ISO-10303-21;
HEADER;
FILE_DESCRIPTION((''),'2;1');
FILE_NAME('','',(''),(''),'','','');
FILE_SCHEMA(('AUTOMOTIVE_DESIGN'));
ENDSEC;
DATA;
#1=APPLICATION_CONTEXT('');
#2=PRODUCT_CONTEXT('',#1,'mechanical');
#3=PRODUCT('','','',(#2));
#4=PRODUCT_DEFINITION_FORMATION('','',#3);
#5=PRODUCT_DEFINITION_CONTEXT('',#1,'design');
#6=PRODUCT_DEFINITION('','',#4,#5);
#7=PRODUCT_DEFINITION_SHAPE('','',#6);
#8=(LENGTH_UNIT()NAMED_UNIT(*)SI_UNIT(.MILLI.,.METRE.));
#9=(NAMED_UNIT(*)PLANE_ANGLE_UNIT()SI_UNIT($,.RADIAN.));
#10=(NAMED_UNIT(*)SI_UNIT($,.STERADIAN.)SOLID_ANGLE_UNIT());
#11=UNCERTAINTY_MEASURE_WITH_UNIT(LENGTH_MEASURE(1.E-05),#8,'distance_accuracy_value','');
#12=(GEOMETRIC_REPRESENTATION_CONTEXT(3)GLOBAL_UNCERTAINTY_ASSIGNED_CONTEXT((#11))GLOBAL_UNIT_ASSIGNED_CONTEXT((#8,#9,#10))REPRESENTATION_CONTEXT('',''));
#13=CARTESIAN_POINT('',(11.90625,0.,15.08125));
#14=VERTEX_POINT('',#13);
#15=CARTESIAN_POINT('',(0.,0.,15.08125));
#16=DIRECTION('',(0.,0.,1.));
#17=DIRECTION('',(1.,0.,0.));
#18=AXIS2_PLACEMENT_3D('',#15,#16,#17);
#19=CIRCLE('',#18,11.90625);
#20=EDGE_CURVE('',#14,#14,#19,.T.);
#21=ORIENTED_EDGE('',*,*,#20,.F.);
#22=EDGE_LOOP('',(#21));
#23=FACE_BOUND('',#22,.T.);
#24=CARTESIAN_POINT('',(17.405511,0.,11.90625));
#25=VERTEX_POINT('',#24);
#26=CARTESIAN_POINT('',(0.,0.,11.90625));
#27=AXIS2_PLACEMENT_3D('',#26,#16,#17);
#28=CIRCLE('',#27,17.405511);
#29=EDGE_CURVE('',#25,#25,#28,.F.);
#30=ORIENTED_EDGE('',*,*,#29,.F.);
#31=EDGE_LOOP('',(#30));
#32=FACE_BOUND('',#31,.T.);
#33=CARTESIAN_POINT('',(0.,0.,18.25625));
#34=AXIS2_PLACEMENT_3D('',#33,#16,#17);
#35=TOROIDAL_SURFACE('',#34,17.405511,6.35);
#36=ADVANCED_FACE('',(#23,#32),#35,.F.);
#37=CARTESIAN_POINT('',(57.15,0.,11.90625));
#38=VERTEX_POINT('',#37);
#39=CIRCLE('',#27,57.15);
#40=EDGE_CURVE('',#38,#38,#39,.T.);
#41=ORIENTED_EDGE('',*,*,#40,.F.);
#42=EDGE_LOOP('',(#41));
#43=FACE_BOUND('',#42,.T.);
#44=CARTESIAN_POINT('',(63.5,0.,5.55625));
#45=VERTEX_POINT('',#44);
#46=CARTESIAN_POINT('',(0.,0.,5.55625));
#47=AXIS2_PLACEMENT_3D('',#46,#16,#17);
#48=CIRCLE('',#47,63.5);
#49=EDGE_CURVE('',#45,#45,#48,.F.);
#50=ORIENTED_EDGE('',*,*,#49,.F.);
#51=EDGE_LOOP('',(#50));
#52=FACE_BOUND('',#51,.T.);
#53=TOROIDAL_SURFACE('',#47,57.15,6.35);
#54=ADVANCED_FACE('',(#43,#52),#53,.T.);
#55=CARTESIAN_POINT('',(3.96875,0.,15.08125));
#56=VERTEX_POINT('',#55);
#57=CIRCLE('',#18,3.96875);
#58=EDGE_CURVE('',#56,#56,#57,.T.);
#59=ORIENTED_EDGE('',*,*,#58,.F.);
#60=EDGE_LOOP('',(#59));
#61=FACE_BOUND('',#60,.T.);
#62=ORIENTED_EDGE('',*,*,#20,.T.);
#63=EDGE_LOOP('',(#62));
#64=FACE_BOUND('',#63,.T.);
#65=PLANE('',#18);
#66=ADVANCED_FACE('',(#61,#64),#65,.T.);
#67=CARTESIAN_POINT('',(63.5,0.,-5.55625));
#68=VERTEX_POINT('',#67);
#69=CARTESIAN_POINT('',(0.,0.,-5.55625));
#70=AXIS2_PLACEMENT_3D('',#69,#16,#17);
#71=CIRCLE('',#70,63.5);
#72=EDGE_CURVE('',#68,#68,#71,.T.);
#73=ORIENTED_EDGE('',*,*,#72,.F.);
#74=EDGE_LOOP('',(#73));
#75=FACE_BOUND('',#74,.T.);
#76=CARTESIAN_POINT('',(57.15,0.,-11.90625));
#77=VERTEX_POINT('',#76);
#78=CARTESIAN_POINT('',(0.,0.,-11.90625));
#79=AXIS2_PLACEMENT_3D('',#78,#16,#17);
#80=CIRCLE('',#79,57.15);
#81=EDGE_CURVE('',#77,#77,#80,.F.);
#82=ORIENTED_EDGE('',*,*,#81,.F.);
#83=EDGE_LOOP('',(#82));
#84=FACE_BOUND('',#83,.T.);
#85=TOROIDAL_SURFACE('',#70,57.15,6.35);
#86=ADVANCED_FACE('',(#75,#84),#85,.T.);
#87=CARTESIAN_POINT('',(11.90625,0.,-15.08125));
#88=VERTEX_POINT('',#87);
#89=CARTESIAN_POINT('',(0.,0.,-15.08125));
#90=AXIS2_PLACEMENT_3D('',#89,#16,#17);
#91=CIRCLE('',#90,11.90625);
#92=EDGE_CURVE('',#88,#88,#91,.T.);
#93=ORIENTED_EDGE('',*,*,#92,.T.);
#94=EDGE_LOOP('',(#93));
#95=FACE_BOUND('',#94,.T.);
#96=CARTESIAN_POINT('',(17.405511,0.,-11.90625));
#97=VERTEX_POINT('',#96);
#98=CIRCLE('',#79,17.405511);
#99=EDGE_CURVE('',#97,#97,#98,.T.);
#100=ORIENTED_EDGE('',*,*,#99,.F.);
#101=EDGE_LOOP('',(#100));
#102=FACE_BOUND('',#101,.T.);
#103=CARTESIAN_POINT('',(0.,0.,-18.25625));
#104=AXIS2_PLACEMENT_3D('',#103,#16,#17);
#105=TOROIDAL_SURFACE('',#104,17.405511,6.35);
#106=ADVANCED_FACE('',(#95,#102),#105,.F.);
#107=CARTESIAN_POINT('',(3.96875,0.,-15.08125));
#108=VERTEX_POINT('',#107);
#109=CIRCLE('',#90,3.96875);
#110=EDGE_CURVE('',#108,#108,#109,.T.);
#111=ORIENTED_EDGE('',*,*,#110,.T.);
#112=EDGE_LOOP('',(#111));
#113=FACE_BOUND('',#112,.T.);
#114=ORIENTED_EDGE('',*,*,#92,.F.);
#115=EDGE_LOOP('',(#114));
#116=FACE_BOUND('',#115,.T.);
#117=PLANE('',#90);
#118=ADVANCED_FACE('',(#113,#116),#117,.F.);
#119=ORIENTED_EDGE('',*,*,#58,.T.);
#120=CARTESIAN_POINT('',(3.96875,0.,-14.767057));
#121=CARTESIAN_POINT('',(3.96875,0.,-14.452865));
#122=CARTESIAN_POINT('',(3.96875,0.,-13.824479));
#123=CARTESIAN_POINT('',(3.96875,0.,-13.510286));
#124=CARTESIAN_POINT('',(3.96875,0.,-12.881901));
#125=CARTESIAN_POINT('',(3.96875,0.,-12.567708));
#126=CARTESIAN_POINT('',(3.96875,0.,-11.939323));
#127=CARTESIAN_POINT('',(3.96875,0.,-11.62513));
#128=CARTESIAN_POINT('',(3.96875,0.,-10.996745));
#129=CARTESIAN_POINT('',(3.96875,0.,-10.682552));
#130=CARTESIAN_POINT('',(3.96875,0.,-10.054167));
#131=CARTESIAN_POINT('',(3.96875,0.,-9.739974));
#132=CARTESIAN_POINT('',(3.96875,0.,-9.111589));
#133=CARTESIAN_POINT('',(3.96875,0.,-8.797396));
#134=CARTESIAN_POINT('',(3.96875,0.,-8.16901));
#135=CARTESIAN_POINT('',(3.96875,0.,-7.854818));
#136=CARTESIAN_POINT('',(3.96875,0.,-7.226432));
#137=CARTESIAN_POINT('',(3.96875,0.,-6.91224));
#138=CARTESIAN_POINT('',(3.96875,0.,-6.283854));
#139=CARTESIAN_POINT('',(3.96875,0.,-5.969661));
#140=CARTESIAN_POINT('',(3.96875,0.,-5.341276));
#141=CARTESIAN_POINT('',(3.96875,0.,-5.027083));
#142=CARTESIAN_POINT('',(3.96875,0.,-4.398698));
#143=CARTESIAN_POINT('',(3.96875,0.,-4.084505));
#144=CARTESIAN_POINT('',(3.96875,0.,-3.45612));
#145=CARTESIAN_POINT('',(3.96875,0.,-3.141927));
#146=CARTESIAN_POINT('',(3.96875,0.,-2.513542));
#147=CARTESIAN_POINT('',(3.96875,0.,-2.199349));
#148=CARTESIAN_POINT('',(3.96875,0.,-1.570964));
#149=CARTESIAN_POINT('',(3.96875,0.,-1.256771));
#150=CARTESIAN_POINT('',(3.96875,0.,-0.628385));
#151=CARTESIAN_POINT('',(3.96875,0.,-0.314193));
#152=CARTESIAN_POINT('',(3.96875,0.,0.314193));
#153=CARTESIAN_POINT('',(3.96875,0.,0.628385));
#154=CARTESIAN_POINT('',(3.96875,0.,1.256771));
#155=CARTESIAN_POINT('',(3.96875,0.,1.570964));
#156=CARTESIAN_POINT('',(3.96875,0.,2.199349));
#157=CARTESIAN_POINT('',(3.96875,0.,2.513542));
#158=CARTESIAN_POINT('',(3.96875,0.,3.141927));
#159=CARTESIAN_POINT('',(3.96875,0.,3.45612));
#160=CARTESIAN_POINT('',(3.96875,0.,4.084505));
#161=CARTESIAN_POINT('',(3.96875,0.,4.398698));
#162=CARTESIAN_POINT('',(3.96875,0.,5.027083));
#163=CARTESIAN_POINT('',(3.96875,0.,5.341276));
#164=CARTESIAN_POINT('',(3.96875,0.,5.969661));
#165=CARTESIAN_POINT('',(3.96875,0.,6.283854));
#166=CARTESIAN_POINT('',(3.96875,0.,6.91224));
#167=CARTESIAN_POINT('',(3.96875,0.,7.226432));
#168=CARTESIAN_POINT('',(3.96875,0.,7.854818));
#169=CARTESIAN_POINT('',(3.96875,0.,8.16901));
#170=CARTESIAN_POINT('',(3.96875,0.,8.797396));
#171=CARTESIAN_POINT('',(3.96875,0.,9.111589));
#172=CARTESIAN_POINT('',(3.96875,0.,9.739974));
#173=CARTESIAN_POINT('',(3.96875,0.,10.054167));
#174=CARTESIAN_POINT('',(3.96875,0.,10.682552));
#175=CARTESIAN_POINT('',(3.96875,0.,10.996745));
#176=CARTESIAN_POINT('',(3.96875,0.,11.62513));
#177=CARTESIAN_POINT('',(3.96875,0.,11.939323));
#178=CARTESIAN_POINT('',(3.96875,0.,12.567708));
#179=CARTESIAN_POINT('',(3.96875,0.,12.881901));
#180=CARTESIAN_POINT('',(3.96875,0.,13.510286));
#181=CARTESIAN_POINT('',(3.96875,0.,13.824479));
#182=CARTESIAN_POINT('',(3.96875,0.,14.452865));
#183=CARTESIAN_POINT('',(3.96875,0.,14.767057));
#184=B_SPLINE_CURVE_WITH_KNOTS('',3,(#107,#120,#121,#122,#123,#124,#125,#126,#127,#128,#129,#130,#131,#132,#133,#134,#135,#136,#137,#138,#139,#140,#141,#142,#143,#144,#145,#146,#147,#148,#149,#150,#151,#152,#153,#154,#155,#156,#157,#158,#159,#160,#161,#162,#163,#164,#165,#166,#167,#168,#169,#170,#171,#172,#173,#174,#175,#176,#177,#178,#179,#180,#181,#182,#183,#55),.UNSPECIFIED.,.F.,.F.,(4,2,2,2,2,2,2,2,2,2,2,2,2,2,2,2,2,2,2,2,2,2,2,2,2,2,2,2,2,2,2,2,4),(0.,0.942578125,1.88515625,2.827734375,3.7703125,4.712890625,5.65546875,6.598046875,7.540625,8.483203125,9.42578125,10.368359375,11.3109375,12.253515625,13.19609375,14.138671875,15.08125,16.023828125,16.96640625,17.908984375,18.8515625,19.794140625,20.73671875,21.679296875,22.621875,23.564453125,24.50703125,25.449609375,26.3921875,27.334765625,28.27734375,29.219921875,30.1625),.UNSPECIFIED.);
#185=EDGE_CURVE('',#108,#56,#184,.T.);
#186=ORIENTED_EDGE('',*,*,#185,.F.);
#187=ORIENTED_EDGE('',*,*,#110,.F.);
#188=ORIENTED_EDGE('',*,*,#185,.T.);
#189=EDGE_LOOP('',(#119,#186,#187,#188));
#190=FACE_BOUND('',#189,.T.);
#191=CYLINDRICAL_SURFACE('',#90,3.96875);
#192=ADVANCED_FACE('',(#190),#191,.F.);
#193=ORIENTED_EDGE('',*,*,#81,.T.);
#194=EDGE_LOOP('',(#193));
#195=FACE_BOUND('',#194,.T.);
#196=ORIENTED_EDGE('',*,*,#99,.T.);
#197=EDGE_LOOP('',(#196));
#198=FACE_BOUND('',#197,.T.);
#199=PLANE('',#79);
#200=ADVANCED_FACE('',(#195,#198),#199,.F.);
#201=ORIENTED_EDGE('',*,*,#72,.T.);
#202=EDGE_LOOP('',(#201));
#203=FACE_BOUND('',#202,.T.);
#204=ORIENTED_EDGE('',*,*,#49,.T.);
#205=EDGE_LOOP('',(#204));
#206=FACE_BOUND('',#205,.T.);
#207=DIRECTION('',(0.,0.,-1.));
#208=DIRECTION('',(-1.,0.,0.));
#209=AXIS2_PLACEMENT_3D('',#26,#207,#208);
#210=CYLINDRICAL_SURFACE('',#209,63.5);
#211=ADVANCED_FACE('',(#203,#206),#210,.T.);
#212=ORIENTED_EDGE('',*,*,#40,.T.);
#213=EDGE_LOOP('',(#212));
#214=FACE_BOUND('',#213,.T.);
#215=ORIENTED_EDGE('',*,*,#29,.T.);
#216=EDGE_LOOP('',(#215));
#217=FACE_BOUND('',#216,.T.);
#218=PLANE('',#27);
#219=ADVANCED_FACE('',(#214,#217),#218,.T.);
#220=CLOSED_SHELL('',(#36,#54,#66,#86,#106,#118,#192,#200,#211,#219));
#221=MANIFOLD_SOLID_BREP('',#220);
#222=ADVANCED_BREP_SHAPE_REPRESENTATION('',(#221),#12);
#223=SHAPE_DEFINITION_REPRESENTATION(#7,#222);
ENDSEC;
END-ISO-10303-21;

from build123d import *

# Parameters (mm, degrees)
SKETCH1_R               = 63.5
BOSS_EXTRUDE1_DEPTH     = 11.90625
SKETCH2_R               = 11.90625
BOSS_EXTRUDE2_DEPTH     = 15.08125
CUT_EXTRUDE1_DEPTH      = 92.060112572
CUT_EXTRUDE1_DEPTH_BACK = 92.060112572
SKETCH3_R               = 3.96875
FILLET1_R               = 6.35


with BuildPart() as part:
    # Sketch1 → Boss-Extrude1 (new, symmetric)
    with BuildSketch(Plane.XY):
        Circle(SKETCH1_R)
    extrude(amount=BOSS_EXTRUDE1_DEPTH, both=True)

    # Sketch2 → Boss-Extrude2 (add, symmetric)
    with BuildSketch(Plane.XY):
        with Locations(Location((0, 0, 0), (0, 0, 180))):
            Circle(SKETCH2_R)
    extrude(amount=BOSS_EXTRUDE2_DEPTH, both=True)

    # Sketch3 → Cut-Extrude1 (cut, two sides: drawn at the far end of the back side and taken through both)
    with BuildSketch(Plane.XY.offset(-CUT_EXTRUDE1_DEPTH_BACK)):
        Circle(SKETCH3_R)
    extrude(amount=CUT_EXTRUDE1_DEPTH + CUT_EXTRUDE1_DEPTH_BACK, mode=Mode.SUBTRACT)

    # Fillet1
    # the kernel refuses this fillet: 6.35 mm, written as the material it adds along each edge
    with BuildSketch(Plane(origin=(0, 0, -11.90625), x_dir=(-1, 0, 0), z_dir=(0, 1, 0))) as fillet1_piece_1:
        with BuildLine():
            CenterArc((17.405511314, -6.35), FILLET1_R, 90, 60)
            Line((17.405511314, 0), (11.90625, 0))
            Line((11.90625, 0), (11.90625, -3.175))
        make_face()
    revolve(axis=Axis((0, 0, -11.90625), (0, 0, 1)))
    with BuildSketch(Plane(origin=(0, 0, 11.90625), x_dir=(-1, 0, 0), z_dir=(0, 1, 0))) as fillet1_piece_2:
        with BuildLine():
            CenterArc((17.405511314, 6.35), FILLET1_R, 210, 60)
            Line((11.90625, 3.175), (11.90625, 0))
            Line((11.90625, 0), (17.405511314, 0))
        make_face()
    revolve(axis=Axis((0, 0, 11.90625), (0, 0, 1)))
    # the kernel refuses this fillet: 6.35 mm, written as the material it takes off along each edge
    with BuildSketch(Plane(origin=(0, 0, -11.90625), x_dir=(1, 0, 0), z_dir=(0, -1, 0))) as fillet1_2_piece_1:
        with BuildLine():
            CenterArc((63.5 - FILLET1_R, FILLET1_R), FILLET1_R, 270, 90)
            Line((63.5 - FILLET1_R, 0), (63.5, 0))
            Line((63.5, 0), (63.5, FILLET1_R))
        make_face()
    revolve(axis=Axis((0, 0, -11.90625), (0, 0, 1)), mode=Mode.SUBTRACT)
    with BuildSketch(Plane(origin=(0, 0, 11.90625), x_dir=(1, 0, 0), z_dir=(0, -1, 0))) as fillet1_2_piece_2:
        with BuildLine():
            CenterArc((63.5 - FILLET1_R, -FILLET1_R), FILLET1_R, 0, 90)
            Line((63.5 - FILLET1_R, 0), (63.5, 0))
            Line((63.5, 0), (63.5, -FILLET1_R))
        make_face()
    revolve(axis=Axis((0, 0, 11.90625), (0, 0, 1)), mode=Mode.SUBTRACT)


solid = part.part
